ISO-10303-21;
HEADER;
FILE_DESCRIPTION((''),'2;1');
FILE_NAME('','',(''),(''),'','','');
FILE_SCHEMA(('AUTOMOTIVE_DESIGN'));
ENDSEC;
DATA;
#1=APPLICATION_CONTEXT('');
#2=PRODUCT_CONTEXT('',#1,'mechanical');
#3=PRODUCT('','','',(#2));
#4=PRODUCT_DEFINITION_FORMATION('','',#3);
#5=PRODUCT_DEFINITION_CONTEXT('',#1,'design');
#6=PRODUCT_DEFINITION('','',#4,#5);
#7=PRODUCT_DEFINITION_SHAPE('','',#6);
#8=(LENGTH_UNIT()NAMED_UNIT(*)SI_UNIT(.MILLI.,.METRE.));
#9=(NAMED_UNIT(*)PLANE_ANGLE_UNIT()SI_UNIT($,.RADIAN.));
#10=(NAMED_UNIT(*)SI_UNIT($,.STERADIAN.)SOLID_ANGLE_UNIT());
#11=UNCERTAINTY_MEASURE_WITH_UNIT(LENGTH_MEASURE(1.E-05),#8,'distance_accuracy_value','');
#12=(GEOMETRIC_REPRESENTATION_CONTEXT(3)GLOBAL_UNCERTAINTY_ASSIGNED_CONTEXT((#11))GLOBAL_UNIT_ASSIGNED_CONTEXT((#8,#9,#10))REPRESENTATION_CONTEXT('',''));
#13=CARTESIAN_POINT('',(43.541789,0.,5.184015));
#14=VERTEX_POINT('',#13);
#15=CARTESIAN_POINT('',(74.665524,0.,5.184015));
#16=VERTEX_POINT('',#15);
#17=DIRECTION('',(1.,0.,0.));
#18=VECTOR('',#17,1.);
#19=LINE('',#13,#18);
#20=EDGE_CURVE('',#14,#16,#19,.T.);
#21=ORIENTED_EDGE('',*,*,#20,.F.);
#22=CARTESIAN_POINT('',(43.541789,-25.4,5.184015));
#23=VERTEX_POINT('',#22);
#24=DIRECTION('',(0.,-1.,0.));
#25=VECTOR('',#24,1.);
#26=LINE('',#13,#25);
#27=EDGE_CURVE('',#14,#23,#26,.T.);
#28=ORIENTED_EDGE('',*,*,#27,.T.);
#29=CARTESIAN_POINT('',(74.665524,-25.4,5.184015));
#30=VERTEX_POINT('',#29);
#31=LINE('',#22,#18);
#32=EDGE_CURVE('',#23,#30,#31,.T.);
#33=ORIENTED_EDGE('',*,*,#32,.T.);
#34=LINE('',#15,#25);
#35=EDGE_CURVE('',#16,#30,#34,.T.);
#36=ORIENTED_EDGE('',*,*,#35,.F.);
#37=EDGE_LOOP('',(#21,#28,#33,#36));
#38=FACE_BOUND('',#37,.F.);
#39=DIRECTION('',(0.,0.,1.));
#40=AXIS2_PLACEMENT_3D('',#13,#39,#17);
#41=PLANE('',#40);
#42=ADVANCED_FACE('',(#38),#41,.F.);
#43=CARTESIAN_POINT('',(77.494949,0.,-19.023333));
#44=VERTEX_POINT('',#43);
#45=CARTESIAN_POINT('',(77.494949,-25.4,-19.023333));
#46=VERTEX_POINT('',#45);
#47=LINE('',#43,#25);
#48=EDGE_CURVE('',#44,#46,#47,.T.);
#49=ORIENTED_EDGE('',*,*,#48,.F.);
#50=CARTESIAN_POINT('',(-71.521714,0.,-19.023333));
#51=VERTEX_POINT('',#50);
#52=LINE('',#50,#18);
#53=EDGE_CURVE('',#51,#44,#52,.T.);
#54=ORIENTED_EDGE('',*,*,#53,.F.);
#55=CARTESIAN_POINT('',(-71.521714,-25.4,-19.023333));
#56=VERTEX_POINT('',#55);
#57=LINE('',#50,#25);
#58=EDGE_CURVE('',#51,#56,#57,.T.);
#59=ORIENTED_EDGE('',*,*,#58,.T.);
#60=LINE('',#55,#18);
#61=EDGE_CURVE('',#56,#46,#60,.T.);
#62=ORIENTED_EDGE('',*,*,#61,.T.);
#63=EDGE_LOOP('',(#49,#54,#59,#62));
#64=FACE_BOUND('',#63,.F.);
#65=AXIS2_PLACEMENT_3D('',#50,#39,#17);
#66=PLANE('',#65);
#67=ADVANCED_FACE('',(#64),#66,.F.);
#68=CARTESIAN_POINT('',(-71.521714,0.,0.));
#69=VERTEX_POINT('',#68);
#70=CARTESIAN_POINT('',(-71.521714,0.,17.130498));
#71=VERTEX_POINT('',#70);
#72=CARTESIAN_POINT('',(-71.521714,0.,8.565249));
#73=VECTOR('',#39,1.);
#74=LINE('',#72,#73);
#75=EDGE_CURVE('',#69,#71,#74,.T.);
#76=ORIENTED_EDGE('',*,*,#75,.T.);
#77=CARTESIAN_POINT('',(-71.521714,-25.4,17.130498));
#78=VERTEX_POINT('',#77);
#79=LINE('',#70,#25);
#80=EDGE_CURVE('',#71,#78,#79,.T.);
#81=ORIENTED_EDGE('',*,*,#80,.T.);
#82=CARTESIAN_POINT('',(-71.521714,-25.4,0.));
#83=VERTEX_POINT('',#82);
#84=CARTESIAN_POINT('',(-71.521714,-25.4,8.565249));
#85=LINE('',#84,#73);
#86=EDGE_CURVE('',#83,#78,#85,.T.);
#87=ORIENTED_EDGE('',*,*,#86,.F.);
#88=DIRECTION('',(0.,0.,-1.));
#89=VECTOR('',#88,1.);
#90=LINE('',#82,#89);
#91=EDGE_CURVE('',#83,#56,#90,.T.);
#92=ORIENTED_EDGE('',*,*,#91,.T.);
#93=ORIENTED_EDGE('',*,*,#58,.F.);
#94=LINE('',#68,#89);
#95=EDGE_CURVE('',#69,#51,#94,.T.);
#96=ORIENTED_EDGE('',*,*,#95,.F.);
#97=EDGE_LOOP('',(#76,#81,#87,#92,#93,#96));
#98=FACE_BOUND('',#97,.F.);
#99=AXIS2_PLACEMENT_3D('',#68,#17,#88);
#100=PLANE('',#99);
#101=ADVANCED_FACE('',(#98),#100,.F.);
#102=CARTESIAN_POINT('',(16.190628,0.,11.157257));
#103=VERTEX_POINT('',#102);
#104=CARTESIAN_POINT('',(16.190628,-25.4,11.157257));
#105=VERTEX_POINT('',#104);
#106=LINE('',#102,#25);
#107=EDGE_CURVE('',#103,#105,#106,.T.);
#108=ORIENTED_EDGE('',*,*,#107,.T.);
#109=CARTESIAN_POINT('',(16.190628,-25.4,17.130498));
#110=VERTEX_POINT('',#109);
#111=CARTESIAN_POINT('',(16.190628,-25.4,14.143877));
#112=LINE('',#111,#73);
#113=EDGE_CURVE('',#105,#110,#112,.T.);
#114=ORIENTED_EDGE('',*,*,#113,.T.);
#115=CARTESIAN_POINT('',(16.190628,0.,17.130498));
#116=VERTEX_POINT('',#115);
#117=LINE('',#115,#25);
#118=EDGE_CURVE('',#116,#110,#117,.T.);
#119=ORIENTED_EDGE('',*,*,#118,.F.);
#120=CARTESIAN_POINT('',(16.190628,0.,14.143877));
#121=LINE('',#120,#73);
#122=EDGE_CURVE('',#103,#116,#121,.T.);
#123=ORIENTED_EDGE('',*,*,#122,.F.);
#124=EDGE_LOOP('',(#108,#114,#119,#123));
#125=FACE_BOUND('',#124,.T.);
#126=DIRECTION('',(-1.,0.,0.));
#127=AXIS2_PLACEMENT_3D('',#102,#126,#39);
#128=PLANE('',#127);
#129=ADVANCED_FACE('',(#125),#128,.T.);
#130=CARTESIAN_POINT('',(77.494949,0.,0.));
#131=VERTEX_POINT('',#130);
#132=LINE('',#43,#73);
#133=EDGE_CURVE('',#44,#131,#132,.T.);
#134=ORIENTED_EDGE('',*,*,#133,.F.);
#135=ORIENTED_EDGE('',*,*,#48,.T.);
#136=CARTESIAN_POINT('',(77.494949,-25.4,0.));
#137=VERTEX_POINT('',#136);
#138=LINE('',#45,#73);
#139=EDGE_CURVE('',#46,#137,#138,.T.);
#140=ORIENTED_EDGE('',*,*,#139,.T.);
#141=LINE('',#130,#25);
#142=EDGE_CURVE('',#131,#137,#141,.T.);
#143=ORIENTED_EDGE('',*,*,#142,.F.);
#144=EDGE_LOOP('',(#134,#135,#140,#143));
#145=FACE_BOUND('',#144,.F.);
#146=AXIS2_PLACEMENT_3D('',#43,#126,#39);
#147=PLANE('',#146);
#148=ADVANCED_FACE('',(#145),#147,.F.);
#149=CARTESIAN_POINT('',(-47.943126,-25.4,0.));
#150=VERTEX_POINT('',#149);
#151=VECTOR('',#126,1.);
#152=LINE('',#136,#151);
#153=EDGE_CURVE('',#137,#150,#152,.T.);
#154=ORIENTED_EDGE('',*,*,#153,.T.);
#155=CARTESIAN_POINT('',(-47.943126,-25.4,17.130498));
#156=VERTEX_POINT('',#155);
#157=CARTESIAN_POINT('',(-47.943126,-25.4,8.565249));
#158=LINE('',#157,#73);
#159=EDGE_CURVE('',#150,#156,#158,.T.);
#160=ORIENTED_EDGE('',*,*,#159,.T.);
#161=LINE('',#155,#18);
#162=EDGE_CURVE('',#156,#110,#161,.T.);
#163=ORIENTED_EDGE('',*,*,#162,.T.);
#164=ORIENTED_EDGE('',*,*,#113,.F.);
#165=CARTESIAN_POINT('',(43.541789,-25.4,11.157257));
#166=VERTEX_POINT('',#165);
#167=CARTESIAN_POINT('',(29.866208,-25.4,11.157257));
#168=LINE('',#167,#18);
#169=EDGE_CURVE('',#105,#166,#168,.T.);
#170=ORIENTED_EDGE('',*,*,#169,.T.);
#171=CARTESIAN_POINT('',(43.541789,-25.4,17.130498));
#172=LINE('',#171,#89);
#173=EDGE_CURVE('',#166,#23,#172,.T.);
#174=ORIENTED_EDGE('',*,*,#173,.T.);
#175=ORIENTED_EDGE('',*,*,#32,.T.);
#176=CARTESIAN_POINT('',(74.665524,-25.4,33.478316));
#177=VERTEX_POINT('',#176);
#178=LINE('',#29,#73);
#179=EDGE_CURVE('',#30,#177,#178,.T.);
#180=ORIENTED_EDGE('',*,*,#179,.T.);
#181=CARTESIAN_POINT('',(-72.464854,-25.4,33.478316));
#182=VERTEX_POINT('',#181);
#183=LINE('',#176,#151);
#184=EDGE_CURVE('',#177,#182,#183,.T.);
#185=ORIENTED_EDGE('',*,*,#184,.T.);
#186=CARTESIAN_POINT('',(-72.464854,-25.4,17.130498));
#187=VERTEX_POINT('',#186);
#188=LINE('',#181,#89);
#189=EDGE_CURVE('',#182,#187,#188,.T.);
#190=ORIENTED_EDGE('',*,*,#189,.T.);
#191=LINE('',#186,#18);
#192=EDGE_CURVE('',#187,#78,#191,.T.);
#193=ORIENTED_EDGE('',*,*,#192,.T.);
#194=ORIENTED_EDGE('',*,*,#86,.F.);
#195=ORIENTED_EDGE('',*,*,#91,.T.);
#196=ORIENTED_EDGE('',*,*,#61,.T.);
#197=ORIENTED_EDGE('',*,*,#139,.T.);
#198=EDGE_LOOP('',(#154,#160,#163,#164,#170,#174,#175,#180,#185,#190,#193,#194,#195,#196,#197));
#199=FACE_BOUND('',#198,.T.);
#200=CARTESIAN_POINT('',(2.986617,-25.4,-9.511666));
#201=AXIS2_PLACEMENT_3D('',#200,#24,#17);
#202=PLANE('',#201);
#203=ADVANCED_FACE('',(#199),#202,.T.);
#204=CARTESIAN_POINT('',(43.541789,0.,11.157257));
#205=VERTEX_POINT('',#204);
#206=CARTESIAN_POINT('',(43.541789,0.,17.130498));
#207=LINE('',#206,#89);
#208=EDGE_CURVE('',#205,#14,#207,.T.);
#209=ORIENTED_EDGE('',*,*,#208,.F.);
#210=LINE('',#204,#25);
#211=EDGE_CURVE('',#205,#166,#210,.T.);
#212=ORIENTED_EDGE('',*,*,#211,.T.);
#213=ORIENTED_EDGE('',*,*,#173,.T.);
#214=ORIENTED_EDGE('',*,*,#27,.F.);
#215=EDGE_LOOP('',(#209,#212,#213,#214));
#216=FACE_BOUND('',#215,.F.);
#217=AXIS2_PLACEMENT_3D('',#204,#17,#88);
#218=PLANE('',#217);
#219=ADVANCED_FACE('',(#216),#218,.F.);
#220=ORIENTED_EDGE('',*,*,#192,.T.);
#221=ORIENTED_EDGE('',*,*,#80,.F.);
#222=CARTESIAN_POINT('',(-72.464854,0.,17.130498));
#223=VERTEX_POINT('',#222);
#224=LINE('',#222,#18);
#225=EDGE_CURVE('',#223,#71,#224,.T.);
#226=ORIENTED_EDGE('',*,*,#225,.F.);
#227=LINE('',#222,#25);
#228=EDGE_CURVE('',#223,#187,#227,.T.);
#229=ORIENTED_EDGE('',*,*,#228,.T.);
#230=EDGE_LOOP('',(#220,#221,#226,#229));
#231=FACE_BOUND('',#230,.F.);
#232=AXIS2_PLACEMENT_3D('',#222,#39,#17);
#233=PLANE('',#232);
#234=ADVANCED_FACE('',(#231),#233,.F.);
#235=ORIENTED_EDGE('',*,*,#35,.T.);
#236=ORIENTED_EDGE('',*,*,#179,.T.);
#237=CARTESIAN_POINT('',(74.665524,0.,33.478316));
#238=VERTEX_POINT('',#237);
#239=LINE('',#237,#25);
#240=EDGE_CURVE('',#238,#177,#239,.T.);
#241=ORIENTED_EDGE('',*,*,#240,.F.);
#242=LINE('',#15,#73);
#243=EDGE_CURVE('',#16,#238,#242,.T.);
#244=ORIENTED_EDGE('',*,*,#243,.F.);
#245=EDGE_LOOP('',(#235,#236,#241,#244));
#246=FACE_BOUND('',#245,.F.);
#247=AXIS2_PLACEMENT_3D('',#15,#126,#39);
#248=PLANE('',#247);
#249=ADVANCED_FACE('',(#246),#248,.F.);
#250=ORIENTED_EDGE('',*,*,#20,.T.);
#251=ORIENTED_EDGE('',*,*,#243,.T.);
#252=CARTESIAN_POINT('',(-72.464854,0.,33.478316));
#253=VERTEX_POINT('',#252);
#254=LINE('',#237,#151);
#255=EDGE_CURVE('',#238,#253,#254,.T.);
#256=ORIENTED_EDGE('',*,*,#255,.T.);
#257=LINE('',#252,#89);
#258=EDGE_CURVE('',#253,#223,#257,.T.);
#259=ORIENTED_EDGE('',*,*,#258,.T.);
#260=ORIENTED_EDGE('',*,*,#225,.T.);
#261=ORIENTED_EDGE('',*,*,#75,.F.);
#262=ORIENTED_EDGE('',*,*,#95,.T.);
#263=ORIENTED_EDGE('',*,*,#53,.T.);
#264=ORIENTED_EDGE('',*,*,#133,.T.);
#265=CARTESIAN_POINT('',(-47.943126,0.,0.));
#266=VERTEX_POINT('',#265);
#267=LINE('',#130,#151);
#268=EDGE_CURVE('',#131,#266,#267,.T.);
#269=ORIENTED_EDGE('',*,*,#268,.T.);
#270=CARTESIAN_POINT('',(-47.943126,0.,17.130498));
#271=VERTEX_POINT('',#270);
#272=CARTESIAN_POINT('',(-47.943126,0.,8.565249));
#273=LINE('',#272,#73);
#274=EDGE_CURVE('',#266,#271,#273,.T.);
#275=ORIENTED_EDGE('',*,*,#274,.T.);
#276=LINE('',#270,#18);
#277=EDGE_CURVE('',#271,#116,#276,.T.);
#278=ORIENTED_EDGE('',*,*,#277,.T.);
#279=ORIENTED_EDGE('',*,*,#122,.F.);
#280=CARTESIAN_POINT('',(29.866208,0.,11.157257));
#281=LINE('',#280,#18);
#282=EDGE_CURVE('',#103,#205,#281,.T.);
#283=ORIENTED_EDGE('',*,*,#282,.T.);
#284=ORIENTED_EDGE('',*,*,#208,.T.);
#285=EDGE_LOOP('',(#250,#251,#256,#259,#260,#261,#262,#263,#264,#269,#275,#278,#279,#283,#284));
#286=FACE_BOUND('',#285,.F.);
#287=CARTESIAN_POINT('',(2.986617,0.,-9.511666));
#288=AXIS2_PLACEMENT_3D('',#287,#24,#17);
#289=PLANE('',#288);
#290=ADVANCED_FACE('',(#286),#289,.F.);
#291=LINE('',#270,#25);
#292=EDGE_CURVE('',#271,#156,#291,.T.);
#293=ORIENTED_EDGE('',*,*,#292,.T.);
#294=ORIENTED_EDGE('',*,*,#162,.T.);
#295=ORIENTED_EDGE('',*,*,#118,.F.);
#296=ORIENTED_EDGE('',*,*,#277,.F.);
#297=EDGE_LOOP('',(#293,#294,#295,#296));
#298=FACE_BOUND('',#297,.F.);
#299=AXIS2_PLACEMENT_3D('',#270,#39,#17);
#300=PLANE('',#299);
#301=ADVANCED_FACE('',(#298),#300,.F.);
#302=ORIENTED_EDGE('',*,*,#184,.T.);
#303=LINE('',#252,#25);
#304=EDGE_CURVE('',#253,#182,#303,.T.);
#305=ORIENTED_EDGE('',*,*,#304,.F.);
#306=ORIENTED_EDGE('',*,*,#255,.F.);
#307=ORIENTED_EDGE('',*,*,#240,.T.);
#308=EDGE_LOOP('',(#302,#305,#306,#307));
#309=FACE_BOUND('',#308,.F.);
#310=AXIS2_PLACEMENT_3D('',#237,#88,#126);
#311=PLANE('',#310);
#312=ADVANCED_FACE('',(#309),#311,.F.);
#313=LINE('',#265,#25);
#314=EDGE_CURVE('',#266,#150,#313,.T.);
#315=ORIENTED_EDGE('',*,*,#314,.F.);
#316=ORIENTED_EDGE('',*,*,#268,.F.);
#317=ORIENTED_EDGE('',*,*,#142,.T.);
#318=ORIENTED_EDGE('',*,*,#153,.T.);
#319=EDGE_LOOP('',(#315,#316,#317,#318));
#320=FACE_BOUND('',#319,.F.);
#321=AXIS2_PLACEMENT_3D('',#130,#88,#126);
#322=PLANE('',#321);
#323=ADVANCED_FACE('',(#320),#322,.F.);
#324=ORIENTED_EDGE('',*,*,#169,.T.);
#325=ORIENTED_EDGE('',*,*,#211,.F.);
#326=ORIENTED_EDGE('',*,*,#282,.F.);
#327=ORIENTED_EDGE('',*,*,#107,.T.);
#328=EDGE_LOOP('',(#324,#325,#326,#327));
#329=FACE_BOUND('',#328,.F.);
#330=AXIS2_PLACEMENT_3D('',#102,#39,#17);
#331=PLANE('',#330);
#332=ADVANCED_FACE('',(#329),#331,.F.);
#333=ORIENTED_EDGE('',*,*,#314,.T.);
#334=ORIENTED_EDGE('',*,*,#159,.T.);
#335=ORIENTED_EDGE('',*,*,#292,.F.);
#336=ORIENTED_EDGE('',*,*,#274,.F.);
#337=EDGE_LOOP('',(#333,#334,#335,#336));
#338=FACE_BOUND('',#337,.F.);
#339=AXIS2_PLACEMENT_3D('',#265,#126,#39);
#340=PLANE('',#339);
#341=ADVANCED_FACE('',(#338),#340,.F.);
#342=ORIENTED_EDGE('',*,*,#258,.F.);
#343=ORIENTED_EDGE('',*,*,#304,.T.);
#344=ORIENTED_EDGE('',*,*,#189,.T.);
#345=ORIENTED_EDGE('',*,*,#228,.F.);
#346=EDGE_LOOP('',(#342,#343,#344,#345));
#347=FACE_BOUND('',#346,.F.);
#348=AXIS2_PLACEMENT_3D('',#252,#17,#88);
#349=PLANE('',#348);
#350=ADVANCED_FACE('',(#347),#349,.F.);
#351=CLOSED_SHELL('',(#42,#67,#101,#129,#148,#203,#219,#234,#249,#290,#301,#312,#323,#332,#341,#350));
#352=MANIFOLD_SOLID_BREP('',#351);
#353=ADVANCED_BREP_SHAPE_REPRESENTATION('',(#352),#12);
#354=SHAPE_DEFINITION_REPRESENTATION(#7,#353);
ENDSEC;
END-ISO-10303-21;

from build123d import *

# Parameters (mm, degrees)
F0_W     = 23.5785879195
F0_H     = 17.130497843
F0_W_2   = 27.351161465
F0_H_2   = 5.9732412919
F1_DEPTH = 25.4


with BuildPart() as f1:
    # F0 (on Front) → F1 (new body)
    with BuildSketch(Plane.XZ):
        Polygon((-47.9431264102, 0), (-71.5217143297, 0), (-71.5217143297, -19.0233327448), (77.4949491024, -19.0233327448), (77.4949491024, 0), align=None)
        with Locations((-59.73242037, 8.5652489215)):
            Rectangle(F0_W, F0_H)
        Polygon((74.6655240655, 5.1840152591), (74.6655240655, 17.130497843), (43.5417890549, 17.130497843), (43.5417890549, 11.1572565511), (43.5417890549, 5.1840152591), align=None)
        with Locations((29.8662083223, 14.1438771971)):
            Rectangle(F0_W_2, F0_H_2)
        Polygon((-72.4648535252, 33.4783159196), (-72.4648535252, 17.130497843), (-71.5217143297, 17.130497843), (-47.9431264102, 17.130497843), (16.1906275898, 17.130497843), (43.5417890549, 17.130497843), (74.6655240655, 17.130497843), (74.6655240655, 33.4783159196), align=None)
    extrude(amount=F1_DEPTH)


solid = f1.part
